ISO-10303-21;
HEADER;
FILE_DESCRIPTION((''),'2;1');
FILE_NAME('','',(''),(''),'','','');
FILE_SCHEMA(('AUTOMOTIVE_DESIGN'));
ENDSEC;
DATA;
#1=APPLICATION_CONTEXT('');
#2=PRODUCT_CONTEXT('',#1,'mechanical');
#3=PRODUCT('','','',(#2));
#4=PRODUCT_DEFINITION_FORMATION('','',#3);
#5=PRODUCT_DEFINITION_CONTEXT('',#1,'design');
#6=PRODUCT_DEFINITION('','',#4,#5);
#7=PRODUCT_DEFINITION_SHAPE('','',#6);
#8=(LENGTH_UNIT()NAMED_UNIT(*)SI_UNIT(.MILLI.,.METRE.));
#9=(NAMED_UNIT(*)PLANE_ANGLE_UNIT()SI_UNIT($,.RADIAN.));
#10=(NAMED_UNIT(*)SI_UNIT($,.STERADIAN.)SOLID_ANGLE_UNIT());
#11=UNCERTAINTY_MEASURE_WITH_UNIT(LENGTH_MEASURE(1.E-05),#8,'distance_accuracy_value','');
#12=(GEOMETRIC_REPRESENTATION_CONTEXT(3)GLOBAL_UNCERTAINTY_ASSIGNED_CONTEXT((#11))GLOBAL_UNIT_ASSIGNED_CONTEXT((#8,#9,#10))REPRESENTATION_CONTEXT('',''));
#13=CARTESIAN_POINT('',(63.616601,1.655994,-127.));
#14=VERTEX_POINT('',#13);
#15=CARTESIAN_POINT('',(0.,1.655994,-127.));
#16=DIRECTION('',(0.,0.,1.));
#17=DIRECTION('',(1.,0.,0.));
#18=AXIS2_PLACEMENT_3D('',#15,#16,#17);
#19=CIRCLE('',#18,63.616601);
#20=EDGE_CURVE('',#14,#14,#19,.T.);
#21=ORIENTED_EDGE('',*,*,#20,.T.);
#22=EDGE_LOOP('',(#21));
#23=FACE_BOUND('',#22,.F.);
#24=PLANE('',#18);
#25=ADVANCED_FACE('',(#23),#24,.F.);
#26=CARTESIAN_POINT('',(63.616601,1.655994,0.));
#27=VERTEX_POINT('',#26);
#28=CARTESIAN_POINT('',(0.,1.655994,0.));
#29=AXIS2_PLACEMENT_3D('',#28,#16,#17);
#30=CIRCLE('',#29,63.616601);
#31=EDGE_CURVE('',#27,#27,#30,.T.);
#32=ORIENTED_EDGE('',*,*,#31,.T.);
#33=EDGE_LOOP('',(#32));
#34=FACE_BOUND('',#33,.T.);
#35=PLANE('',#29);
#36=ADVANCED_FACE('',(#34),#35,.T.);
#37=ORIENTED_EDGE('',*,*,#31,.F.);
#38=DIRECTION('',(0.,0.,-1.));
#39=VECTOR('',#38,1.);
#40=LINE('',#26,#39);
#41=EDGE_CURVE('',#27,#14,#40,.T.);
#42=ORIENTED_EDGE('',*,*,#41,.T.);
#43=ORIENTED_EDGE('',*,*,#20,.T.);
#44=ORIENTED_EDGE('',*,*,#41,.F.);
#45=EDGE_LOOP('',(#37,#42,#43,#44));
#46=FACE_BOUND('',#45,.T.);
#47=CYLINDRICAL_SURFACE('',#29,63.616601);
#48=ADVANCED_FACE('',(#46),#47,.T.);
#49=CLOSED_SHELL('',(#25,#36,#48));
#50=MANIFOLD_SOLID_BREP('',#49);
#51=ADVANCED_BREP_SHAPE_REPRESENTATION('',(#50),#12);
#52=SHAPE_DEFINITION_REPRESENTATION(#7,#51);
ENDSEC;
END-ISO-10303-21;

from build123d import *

# Parameters (mm, degrees)
F0_R     = 63.6166007417
F1_DEPTH = 127


# Not quite as in the source:
# - a feature names something its author has since deleted; it is built from what else it names


with BuildPart() as f1:
    # F0 (on Top) → F1 (new body)
    with BuildSketch(Plane.XY):
        with Locations((0, 1.6559939831)):
            Circle(F0_R)
    extrude(amount=-F1_DEPTH)


solid = f1.part
